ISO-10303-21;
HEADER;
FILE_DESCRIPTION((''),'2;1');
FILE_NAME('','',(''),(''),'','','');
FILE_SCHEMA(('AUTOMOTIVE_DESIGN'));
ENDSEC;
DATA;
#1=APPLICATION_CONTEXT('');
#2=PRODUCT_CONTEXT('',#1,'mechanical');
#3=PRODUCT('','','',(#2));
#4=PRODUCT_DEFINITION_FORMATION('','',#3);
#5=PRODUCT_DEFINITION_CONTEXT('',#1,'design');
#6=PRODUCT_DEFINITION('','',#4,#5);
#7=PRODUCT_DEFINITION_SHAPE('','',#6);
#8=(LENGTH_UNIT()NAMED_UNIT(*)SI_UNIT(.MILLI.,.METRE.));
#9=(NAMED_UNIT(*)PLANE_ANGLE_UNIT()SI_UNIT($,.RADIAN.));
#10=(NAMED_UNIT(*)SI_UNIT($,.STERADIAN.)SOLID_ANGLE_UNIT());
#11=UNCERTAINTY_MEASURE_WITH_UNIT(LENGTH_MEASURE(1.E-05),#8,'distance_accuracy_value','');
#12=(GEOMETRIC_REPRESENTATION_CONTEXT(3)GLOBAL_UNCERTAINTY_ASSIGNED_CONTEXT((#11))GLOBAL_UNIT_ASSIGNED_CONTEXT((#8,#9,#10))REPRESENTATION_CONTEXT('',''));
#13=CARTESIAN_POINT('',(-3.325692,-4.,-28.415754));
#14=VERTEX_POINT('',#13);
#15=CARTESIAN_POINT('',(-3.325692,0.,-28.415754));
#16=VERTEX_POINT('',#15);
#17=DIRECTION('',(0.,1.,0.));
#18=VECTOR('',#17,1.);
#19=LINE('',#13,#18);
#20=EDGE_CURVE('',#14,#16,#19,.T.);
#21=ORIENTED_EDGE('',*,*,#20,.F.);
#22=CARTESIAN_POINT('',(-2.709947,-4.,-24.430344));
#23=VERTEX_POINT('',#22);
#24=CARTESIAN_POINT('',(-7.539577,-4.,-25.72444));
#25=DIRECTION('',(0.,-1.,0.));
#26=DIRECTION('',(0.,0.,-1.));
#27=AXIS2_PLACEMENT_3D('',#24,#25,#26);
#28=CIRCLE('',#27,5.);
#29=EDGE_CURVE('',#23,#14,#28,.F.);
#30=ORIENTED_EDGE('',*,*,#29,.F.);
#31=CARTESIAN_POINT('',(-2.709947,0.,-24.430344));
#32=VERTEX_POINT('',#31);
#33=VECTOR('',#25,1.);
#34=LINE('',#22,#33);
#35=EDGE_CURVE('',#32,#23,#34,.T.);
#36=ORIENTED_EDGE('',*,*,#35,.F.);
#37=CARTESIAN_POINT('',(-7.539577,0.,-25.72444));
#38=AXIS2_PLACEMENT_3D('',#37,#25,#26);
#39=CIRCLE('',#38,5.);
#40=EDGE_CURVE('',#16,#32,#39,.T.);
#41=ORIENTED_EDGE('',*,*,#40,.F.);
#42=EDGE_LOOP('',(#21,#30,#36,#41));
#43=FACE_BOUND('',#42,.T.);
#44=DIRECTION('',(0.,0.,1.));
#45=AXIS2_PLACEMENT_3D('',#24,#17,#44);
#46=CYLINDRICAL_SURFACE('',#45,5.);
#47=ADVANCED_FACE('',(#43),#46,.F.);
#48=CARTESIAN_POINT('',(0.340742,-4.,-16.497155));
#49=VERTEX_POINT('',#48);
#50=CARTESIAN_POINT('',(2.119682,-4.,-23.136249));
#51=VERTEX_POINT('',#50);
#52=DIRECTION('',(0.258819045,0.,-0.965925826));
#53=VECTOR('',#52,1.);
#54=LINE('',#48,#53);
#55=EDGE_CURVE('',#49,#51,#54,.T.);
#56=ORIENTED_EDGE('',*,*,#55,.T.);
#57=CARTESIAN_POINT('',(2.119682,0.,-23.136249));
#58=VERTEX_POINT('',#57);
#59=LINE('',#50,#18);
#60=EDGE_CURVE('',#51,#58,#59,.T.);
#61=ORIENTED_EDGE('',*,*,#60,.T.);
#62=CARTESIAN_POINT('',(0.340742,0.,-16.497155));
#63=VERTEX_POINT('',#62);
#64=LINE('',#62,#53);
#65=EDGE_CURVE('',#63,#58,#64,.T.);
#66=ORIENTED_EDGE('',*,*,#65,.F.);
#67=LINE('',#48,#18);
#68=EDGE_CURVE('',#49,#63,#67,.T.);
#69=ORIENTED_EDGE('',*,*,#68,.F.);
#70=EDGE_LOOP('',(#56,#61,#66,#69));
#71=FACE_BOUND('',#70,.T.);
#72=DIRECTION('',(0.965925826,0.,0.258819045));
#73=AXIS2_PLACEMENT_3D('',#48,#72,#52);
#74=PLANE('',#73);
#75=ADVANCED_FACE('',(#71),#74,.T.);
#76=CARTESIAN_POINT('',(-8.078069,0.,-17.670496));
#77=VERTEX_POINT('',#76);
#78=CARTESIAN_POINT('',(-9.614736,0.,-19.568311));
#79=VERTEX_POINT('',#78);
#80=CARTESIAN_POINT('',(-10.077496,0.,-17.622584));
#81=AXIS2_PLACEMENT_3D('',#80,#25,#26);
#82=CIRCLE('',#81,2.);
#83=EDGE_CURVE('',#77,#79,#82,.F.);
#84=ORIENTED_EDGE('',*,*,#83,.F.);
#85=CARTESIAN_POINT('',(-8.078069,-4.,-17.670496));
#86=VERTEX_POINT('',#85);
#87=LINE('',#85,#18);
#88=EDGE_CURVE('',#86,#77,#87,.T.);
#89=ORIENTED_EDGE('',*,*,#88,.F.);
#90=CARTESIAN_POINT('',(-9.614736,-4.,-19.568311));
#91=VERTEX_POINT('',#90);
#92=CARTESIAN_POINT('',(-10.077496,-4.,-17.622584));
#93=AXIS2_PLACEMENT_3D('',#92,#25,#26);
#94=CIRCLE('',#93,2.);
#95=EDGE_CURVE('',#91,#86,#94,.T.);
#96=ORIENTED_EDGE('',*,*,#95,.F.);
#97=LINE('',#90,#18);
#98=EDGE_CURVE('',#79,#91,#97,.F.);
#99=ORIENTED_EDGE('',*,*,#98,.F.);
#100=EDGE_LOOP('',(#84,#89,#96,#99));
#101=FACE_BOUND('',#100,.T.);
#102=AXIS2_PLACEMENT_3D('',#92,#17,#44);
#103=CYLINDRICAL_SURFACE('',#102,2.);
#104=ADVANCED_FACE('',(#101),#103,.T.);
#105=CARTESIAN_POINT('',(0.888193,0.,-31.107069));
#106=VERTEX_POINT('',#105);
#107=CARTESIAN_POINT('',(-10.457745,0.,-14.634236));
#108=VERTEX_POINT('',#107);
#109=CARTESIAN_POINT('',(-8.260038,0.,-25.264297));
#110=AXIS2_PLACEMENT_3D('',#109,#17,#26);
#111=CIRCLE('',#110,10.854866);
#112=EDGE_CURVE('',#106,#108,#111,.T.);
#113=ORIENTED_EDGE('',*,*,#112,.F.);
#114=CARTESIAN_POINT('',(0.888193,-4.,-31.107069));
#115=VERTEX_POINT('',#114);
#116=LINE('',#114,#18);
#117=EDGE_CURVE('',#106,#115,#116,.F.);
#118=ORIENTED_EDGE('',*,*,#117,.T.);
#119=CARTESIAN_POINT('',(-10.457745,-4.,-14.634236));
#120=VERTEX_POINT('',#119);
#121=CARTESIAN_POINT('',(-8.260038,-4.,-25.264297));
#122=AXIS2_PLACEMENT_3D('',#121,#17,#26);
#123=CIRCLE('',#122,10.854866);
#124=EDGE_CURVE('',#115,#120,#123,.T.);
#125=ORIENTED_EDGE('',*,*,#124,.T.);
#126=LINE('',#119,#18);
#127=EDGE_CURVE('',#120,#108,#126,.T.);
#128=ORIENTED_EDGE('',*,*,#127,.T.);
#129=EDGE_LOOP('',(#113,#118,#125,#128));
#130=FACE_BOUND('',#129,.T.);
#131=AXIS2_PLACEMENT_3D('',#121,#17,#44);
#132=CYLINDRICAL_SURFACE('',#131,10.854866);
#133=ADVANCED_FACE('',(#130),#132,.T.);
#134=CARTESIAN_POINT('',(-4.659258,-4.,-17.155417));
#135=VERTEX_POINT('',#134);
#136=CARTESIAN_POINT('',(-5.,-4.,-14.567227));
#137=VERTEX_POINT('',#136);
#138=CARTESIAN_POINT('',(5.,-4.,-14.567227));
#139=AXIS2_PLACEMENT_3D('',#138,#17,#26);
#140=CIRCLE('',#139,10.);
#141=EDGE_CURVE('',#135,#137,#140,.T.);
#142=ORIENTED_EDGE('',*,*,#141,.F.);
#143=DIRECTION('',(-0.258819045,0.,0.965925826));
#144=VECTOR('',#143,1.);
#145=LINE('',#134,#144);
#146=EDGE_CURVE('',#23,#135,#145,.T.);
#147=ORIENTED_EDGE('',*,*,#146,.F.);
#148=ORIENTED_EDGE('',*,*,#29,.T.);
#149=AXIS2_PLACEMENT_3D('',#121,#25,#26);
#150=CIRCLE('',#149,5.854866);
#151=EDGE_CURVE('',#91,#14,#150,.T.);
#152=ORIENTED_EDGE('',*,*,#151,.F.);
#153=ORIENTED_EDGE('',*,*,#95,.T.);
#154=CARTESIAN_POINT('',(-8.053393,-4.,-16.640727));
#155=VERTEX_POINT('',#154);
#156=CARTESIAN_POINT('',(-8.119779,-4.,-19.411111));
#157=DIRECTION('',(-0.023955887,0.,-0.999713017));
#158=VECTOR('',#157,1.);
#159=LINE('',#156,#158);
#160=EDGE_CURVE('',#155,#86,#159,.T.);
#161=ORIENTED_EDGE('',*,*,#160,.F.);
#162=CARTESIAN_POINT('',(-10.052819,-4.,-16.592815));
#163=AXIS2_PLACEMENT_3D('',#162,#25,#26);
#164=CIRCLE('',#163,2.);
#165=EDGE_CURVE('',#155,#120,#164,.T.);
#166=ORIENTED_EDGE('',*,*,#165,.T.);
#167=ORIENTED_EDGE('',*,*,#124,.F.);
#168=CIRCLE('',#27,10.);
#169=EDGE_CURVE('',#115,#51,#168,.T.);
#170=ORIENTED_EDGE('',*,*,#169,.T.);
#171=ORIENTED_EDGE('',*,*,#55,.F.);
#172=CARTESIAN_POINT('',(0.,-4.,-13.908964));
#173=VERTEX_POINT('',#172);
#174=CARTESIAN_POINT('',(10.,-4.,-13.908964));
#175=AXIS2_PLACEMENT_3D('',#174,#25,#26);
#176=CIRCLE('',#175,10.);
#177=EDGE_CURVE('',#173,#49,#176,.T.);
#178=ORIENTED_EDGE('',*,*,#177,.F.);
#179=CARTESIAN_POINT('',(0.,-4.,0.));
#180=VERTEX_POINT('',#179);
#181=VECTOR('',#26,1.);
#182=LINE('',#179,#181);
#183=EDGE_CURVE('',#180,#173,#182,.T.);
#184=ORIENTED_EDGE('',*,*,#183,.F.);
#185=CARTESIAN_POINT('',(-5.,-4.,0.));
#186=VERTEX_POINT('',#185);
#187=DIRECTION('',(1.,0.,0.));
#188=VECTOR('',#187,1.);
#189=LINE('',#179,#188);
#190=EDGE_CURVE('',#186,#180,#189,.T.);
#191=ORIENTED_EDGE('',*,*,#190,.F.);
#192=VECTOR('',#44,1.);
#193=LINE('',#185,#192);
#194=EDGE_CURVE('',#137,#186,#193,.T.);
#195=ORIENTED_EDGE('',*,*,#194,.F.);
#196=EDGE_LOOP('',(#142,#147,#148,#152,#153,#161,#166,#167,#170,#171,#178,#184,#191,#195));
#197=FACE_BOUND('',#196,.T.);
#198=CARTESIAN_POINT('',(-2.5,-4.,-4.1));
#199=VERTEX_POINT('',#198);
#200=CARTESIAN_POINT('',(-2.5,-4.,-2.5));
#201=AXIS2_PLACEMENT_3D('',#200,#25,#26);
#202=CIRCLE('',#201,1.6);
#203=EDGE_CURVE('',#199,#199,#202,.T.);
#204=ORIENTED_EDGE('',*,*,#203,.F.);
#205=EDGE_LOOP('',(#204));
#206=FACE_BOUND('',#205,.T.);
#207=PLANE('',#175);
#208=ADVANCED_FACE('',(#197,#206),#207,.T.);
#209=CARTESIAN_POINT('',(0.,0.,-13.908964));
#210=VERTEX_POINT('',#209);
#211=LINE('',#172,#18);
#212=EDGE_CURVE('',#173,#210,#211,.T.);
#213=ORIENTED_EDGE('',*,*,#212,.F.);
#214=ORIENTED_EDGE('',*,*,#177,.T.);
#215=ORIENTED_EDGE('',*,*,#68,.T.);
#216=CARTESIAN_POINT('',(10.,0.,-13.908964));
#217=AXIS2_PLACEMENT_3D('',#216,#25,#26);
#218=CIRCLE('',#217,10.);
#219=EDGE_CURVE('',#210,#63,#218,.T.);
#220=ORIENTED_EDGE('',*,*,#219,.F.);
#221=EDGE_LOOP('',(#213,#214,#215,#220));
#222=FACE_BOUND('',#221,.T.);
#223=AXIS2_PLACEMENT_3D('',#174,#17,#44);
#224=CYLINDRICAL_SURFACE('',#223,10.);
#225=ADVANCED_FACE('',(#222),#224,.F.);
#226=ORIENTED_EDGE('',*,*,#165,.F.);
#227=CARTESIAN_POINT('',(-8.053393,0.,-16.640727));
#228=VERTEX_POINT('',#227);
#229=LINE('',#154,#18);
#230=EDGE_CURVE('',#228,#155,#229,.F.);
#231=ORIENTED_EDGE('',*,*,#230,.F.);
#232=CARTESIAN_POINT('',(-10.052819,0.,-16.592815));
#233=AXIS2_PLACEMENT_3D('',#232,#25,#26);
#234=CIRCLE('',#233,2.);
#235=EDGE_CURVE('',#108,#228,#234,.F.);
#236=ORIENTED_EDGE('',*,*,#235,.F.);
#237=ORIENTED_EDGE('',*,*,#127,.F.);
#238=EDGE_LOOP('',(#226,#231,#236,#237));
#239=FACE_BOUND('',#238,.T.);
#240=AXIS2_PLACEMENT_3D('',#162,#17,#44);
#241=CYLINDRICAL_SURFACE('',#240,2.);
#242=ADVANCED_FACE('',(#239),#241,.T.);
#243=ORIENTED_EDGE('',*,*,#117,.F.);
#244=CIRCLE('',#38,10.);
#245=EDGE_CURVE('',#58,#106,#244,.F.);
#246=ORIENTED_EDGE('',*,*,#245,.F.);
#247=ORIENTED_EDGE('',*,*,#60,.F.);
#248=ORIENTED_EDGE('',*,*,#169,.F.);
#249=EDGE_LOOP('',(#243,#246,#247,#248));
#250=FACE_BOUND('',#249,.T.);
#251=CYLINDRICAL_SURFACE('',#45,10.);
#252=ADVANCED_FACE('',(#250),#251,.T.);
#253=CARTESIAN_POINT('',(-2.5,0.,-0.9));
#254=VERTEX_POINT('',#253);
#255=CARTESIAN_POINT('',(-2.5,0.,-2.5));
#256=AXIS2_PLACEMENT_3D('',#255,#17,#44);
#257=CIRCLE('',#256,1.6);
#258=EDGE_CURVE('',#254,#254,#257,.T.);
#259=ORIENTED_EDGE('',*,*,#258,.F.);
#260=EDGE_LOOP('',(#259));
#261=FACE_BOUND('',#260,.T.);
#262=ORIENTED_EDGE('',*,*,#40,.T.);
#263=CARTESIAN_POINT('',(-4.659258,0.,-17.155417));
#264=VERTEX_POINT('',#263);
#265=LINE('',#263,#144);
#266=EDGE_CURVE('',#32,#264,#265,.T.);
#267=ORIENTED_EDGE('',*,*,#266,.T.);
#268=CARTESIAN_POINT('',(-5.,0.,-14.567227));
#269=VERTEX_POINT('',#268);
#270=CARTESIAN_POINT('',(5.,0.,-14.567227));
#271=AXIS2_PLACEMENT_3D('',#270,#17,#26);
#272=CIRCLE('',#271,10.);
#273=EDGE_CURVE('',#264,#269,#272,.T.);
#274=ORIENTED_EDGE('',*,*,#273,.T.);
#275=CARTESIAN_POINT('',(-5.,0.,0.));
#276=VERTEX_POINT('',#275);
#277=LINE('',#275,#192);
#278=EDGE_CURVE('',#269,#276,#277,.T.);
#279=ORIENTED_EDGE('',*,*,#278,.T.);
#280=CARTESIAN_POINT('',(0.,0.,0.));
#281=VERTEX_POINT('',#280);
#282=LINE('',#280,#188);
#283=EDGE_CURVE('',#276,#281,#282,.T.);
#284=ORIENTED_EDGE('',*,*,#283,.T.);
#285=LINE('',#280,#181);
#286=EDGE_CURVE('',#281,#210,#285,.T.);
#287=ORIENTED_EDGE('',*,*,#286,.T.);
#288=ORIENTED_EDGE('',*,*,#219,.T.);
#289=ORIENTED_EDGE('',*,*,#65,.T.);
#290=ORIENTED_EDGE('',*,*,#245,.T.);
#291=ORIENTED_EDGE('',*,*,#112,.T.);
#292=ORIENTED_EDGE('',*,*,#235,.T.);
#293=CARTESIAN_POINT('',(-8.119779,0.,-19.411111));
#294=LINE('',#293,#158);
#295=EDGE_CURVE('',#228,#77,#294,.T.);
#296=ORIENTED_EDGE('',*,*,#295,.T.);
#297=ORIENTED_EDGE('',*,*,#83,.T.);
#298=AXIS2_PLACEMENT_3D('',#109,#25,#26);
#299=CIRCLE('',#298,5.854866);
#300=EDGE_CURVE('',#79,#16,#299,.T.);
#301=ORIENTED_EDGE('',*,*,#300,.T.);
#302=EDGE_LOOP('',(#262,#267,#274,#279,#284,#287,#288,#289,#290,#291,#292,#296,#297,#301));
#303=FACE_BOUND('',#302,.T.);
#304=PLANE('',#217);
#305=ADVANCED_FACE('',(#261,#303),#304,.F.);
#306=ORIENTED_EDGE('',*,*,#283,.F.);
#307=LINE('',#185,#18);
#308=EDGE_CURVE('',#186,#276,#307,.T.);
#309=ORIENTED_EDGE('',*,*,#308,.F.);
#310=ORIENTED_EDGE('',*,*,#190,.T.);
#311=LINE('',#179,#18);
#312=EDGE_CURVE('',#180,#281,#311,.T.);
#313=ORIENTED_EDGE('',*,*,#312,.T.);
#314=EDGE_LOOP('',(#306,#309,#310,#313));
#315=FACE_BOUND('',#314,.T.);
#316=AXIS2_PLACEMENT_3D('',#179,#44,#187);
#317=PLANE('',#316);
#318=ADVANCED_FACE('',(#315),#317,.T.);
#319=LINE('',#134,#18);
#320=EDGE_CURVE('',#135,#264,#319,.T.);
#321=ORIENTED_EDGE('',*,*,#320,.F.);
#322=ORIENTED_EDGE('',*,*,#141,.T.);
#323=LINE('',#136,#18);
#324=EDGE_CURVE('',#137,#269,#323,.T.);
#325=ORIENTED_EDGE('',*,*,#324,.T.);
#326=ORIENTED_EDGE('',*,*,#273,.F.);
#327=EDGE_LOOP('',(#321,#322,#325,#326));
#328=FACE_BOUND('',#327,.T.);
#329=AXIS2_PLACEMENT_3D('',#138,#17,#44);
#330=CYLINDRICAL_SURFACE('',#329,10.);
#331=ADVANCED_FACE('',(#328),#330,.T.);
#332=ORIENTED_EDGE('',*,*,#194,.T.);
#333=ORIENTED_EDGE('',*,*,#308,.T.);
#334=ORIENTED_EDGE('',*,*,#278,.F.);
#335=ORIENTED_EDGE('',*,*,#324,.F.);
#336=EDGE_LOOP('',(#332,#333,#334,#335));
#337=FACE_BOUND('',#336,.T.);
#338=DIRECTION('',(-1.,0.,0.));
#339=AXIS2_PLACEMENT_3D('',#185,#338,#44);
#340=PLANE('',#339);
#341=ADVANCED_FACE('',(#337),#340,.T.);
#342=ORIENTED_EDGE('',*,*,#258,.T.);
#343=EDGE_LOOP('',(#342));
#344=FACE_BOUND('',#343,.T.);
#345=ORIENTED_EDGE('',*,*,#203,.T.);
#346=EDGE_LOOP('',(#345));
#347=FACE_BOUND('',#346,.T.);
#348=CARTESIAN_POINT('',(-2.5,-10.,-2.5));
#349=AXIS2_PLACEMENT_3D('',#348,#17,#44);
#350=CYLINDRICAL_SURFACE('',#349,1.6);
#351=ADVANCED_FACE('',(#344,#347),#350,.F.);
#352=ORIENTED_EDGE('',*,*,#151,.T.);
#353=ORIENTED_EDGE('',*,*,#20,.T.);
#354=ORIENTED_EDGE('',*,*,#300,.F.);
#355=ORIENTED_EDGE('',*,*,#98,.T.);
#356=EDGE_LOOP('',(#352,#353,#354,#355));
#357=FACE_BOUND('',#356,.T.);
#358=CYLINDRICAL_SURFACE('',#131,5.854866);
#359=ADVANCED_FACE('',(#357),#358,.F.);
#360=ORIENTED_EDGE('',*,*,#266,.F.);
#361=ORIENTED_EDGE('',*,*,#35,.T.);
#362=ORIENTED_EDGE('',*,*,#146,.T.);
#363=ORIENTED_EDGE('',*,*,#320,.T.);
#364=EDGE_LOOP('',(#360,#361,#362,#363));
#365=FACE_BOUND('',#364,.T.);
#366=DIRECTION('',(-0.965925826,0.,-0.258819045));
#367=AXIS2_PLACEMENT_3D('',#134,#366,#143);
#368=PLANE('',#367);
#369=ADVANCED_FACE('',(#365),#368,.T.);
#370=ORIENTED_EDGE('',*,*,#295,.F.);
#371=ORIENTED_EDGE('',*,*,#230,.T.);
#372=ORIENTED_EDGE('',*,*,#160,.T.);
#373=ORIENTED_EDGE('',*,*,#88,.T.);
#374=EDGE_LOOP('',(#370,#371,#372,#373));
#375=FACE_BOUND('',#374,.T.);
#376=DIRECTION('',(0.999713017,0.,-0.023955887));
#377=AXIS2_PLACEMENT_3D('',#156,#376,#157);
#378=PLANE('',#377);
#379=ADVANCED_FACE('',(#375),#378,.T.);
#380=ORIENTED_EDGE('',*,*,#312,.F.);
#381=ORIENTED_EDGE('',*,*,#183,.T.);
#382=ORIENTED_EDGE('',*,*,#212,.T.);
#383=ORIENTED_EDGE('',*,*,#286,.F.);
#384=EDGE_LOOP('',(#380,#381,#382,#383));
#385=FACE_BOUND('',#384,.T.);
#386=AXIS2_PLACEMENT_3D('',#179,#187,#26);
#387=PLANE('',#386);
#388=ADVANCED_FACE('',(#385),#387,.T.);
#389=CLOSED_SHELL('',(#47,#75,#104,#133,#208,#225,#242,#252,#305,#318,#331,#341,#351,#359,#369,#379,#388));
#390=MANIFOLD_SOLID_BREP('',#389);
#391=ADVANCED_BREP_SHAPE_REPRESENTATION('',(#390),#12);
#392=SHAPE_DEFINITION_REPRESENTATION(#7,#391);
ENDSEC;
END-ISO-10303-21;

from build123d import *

# Parameters (mm, degrees)
BASE_FLANGE1_DEPTH = 4
FILLET1_R          = 2
FILLET2_R          = 5
FILLET3_R          = 10
SKETCH6_R          = 1.6
CUT_EXTRUDE1_DEPTH = 10


# Sheet-metal steps are written as plain solids
with BuildPart() as part:
    # Sketch1 → Base-Flange1 (new body)
    with BuildSketch(Plane(origin=(0, 0, 0), x_dir=(1, 0, 0), z_dir=(0, 1, 0))):
        with BuildLine():
            Line((0, 0), (-5, 0))
            Line((-5, 0), (-5, 14.567226763))
            ThreePointArc((-5, 14.567226763), (-4.914448614, 15.872488686), (-4.659258263, 17.155417214))
            Line((-4.659258263, 17.155417214), (-2.411809549, 25.543010002))
            ThreePointArc((-2.411809549, 25.543010002), (-12.545541462, 29.253521737), (-8.119779436, 19.41111094))
            Line((-8.119779436, 19.41111094), (-8, 14.412545857))
            ThreePointArc((-8, 14.412545857), (-15.893198966, 32.982001696), (2.588190451, 24.884747514))
            Line((2.588190451, 24.884747514), (0.340741737, 16.497154727))
            ThreePointArc((0.340741737, 16.497154727), (0.085551386, 15.214226198), (0, 13.908964276))
            Line((0, 13.908964276), (0, 0))
        make_face()
    extrude(amount=-BASE_FLANGE1_DEPTH)

    # Fillet1
    fillet1_edges = [part.edges().sort_by_distance(p)[0] for p in [
        (-8.119779436, -2, -19.41111094),
        (-8, -2, -14.412545857),
    ]]
    fillet(fillet1_edges, radius=FILLET1_R)

    # Fillet2
    fillet2_edges = [part.edges().sort_by_distance(p)[0] for p in [
        (-2.411809549, -2, -25.543010002),
    ]]
    fillet(fillet2_edges, radius=FILLET2_R)

    # Fillet3
    fillet3_edges = [part.edges().sort_by_distance(p)[0] for p in [
        (2.588190451, -2, -24.884747514),
    ]]
    fillet(fillet3_edges, radius=FILLET3_R)

    # Sketch6 → Cut-Extrude1 (cut)
    with BuildSketch(Plane(origin=(0, 0, 0), x_dir=(1, 0, 0), z_dir=(0, 1, 0))):
        with Locations(Location((-2.5, 2.5, 0), (0, 0, 270))):
            Circle(SKETCH6_R)
    extrude(amount=-CUT_EXTRUDE1_DEPTH, mode=Mode.SUBTRACT)


solid = part.part
